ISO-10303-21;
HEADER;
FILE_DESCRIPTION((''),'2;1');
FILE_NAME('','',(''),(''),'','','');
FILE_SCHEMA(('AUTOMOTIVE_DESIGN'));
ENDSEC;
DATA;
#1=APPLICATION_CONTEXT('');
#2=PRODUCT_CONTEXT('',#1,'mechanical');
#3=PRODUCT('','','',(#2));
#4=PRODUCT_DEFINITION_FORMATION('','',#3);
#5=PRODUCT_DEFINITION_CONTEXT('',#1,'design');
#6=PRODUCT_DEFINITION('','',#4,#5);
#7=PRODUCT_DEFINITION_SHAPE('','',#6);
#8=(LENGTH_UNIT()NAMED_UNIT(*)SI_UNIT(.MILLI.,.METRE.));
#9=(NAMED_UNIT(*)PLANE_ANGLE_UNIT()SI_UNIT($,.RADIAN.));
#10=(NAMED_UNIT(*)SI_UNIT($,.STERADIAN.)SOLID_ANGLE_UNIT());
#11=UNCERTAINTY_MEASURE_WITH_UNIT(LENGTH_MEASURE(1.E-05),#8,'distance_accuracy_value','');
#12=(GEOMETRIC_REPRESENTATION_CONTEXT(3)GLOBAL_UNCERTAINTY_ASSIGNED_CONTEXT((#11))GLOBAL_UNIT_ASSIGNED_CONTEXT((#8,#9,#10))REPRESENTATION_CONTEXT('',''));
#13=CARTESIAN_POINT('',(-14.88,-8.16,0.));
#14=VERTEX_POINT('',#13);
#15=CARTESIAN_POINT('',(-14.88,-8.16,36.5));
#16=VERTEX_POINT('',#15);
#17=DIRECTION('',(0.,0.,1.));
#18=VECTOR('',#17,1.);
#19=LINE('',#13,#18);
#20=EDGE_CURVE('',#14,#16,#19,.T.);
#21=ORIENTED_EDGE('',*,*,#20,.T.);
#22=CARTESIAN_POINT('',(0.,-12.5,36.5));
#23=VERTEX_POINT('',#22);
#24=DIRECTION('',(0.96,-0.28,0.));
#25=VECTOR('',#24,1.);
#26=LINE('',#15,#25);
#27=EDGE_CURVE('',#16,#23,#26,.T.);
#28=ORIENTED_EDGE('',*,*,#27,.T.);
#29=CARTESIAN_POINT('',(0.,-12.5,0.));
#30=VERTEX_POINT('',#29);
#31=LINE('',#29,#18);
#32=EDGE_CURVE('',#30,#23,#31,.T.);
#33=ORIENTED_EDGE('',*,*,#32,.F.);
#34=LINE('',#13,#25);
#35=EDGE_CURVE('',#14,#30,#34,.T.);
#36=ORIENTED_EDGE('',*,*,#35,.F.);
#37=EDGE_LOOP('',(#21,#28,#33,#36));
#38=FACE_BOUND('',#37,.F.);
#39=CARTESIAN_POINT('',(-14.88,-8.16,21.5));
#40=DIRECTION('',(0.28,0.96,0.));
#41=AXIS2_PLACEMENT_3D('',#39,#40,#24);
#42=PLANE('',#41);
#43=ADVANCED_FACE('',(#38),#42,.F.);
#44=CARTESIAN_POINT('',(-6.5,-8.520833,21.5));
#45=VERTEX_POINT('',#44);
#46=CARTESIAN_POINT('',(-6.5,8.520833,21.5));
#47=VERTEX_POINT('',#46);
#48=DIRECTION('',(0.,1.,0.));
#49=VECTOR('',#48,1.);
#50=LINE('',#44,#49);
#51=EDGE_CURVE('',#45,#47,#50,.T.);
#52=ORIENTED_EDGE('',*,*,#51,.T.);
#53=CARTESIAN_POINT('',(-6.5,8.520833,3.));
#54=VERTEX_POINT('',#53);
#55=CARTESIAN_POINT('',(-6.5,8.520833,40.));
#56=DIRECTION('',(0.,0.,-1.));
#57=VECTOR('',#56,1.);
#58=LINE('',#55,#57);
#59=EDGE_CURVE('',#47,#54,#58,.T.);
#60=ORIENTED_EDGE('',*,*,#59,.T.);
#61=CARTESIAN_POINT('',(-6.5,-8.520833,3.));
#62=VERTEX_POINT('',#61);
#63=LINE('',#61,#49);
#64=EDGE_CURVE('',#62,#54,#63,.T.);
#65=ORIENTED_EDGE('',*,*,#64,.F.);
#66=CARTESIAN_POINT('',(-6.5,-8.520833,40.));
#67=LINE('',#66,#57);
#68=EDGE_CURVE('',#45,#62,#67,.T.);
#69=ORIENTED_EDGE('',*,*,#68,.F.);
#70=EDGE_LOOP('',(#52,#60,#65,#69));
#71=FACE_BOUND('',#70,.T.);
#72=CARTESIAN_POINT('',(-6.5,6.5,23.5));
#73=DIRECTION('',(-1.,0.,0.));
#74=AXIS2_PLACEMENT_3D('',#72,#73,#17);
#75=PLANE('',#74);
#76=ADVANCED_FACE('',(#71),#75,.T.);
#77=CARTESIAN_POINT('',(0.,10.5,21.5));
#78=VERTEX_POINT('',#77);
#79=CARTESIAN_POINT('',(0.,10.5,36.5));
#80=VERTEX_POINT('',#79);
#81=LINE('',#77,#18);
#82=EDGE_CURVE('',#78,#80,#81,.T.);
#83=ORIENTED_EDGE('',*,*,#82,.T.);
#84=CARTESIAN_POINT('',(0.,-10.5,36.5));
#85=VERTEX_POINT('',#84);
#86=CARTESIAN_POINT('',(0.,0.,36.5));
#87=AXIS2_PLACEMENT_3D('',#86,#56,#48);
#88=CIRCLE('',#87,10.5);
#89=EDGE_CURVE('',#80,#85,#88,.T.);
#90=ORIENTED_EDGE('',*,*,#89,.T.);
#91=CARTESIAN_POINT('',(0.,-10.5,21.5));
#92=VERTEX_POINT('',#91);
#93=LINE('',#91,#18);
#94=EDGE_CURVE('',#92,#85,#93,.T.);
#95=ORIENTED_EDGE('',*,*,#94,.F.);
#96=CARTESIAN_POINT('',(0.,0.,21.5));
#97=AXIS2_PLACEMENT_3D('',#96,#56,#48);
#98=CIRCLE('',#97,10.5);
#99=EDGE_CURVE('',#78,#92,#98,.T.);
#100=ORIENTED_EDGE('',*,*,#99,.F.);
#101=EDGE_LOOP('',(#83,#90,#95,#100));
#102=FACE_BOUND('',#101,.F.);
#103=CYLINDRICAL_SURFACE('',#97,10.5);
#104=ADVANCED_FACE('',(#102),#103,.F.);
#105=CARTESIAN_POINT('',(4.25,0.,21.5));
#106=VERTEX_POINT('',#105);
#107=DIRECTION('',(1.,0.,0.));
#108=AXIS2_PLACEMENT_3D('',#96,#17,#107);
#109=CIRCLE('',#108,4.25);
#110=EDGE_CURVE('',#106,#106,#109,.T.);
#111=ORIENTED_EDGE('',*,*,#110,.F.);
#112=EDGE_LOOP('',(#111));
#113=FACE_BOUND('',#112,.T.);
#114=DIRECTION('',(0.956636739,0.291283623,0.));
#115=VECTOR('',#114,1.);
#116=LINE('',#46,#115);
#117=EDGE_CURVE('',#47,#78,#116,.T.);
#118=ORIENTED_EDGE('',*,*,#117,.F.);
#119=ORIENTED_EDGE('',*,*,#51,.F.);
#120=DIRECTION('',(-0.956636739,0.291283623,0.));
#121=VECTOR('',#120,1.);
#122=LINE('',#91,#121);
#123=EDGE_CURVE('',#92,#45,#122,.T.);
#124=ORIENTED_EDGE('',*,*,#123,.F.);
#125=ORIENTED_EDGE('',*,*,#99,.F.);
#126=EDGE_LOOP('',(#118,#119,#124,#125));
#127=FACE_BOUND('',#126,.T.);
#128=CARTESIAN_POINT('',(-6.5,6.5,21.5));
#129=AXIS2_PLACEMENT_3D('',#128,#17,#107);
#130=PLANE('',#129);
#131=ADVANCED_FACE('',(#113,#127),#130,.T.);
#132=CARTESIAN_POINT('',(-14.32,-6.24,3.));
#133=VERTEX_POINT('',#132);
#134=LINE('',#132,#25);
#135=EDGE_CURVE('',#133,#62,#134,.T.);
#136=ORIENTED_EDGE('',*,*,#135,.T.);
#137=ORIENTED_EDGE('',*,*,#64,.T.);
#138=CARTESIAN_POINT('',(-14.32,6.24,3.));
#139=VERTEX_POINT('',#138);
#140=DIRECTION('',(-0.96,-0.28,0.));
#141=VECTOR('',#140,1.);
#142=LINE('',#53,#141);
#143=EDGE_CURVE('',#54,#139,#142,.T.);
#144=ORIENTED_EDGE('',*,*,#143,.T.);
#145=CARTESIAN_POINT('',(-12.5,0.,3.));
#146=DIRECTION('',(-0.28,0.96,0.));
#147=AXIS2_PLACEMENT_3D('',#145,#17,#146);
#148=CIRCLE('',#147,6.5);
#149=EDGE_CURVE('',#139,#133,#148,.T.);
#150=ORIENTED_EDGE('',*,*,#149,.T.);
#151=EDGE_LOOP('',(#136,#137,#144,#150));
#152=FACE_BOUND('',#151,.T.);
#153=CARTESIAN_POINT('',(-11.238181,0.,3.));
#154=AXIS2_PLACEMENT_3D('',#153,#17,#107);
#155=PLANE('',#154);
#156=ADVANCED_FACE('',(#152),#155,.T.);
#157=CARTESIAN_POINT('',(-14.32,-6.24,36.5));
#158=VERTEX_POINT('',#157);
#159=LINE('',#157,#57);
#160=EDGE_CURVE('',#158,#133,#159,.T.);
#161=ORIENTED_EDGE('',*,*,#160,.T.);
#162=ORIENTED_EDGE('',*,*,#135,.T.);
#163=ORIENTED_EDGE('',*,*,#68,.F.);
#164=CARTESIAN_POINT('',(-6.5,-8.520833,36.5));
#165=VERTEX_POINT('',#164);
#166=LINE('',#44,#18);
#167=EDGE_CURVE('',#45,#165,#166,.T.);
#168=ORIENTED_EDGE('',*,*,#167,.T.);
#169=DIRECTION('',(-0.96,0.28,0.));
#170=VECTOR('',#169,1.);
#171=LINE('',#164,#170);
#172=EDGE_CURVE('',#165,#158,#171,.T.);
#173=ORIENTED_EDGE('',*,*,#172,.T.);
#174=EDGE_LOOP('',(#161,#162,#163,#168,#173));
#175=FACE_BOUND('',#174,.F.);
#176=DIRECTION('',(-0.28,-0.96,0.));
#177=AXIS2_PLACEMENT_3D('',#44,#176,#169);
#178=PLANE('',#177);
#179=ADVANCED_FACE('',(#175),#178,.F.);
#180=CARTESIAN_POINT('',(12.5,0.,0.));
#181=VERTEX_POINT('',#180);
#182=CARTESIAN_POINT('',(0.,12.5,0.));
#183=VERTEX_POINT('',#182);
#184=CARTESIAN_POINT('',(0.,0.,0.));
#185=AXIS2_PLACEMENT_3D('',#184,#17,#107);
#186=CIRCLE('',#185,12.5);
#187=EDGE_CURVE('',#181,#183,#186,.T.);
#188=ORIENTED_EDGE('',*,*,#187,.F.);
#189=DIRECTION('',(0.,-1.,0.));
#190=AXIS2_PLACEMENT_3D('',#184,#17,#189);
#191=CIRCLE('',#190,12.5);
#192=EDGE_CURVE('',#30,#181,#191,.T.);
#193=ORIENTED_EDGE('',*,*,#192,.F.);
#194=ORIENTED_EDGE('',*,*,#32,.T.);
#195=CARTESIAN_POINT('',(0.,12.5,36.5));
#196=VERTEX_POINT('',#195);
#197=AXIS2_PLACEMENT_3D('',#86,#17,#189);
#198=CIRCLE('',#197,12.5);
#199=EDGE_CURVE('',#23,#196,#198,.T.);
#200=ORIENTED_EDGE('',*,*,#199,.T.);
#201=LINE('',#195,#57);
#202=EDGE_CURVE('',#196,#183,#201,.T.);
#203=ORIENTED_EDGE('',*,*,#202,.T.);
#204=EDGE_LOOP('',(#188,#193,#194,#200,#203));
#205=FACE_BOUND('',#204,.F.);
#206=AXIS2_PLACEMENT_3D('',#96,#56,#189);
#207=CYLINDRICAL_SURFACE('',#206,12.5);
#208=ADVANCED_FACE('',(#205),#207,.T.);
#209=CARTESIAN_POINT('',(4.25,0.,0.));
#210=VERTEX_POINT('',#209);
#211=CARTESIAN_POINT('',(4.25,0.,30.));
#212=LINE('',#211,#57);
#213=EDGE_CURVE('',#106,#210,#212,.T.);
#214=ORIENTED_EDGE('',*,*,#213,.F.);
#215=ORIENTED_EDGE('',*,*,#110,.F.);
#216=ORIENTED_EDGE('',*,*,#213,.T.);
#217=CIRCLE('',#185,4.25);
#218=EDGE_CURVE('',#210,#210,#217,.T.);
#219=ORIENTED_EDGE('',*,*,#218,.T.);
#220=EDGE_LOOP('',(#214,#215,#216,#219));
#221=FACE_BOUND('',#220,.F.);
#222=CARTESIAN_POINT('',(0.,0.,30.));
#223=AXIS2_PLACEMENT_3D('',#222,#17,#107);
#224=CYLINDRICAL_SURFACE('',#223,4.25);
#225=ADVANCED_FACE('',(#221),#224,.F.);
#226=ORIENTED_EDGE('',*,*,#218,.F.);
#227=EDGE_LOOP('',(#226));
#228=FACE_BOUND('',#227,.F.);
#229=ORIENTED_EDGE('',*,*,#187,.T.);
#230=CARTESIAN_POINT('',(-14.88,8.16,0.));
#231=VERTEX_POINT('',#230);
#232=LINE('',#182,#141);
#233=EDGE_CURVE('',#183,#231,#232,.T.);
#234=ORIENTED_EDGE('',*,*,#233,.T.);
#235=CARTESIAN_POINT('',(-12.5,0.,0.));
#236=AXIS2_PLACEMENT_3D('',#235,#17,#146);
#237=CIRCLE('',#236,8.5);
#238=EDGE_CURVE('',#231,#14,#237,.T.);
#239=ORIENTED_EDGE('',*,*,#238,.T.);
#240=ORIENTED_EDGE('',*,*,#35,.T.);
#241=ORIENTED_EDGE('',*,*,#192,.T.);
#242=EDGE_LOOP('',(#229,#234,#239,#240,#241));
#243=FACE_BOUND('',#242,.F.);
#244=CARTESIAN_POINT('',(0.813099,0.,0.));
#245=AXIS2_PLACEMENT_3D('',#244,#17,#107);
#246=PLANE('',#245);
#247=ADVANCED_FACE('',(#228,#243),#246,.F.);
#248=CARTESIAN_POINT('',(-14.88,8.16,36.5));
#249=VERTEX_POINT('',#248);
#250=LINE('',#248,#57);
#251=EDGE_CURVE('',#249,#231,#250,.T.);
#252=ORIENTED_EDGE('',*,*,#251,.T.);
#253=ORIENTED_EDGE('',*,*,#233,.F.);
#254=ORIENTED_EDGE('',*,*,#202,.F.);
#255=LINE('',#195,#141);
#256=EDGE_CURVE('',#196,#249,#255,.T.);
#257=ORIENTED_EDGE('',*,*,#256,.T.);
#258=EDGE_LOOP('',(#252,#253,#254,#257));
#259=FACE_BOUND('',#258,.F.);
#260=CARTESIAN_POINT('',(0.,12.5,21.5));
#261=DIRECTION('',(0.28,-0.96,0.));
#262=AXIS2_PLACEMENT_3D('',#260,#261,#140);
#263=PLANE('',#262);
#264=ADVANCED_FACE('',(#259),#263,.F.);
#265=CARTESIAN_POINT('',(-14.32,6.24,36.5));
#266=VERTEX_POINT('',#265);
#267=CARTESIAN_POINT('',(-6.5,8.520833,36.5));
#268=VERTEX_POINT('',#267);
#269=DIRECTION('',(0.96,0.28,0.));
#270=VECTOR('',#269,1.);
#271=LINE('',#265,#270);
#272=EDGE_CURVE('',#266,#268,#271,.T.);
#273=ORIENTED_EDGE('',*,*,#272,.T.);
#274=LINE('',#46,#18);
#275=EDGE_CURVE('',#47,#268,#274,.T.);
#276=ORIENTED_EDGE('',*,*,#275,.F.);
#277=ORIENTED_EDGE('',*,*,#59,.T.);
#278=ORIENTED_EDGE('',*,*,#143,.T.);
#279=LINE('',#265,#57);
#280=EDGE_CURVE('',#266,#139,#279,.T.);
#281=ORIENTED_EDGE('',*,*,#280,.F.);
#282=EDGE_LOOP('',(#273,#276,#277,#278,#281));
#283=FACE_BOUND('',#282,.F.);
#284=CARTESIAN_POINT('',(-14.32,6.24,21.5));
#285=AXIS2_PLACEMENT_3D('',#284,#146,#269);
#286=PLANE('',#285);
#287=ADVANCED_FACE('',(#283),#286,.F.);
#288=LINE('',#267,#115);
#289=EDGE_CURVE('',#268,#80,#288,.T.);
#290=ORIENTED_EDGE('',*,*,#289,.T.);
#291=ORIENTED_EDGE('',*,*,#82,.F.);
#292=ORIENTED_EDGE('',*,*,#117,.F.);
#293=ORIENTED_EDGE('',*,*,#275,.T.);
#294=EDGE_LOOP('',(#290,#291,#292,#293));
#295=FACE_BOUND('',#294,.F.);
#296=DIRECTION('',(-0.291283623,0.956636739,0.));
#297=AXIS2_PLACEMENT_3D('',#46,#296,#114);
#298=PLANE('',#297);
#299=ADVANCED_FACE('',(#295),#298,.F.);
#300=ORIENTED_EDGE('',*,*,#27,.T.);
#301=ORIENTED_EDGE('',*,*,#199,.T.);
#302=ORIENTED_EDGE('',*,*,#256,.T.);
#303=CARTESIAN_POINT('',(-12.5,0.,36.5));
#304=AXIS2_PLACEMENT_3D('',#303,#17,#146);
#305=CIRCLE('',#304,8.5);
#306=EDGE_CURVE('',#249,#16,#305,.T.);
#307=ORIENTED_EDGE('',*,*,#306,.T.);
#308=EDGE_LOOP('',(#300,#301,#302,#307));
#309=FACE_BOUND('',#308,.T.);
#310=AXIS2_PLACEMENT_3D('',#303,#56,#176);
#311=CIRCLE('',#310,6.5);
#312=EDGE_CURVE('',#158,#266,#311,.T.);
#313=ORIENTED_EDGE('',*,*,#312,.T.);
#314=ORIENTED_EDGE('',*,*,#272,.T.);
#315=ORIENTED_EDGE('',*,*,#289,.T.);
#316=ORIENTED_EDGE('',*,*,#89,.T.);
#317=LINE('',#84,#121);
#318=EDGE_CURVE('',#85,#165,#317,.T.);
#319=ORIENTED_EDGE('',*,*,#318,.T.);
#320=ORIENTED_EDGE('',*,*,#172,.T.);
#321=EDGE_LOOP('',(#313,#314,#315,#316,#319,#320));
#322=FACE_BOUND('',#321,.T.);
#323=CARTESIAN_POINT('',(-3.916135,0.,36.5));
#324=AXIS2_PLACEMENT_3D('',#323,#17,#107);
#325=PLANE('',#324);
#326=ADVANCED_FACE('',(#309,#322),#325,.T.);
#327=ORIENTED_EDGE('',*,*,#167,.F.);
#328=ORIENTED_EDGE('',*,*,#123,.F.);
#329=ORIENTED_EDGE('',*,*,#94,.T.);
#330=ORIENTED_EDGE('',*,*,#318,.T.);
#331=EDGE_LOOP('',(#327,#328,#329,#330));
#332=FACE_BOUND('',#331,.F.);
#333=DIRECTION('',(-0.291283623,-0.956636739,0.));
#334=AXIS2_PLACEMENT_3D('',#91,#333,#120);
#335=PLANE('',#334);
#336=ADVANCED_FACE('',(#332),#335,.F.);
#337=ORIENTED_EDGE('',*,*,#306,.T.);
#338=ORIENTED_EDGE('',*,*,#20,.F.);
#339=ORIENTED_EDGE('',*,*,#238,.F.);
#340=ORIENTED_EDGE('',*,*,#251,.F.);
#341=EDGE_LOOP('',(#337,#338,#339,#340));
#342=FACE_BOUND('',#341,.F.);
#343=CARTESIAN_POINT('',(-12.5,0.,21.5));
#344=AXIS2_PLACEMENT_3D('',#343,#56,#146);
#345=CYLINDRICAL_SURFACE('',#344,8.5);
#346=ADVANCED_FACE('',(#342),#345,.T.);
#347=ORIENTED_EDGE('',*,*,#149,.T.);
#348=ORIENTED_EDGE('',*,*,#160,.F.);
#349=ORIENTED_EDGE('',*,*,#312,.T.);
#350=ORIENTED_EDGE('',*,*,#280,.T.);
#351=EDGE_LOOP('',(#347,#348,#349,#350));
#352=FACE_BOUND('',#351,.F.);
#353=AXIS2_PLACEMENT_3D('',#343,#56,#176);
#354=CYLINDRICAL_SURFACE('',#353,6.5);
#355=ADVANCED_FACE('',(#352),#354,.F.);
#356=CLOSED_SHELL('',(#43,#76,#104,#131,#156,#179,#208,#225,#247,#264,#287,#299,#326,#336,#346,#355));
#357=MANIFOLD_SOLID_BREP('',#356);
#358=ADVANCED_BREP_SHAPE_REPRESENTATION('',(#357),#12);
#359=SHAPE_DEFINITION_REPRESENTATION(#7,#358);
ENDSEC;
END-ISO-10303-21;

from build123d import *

# Parameters (mm, degrees)
F1_DEPTH  = 30
F3_DEPTH  = 27
F2_R      = 4
F5_DEPTH  = 6.5
F4_R      = 4.25
F4_R_2    = 4
F6_DEPTH  = 35.2
F7_DEPTH  = 10
F8_W      = 1
F8_H      = 16.5
F9_DEPTH  = 13.4
F11_DEPTH = 16
F12_DEPTH = 0.5
F13_R     = 1.25
F14_DEPTH = 25
F15_DEPTH = 2
F16_DEPTH = 18.5
F18_DEPTH = 15


with BuildPart() as f1:
    # F0 (on Top) → F1 (new body)
    with BuildSketch(Plane.XY):
        with BuildLine():
            ThreePointArc((-9.61, 7.9936162029), (-5.5424501439, 4.8828782496), (-4, 0))
            ThreePointArc((-4, 0), (-5.5424501439, -4.8828782496), (-9.61, -7.9936162029))
            ThreePointArc((-9.61, -7.9936162029), (-8.2636700449, -9.3787929602), (-6.72, -10.54))
            Line((-6.72, -10.54), (0, -12.5))
            ThreePointArc((0, -12.5), (8.8388347648, -8.8388347648), (12.5, 0))
            ThreePointArc((12.5, 0), (8.8388347648, 8.8388347648), (0, 12.5))
            Line((0, 12.5), (-6.72, 10.54))
            ThreePointArc((-6.72, 10.54), (-8.2636700449, 9.3787929602), (-9.61, 7.9936162029))
        make_face()
        with BuildLine():
            ThreePointArc((-4, 0), (0, 4), (4, 0))
            ThreePointArc((4, 0), (0, -4), (-4, 0))
        make_face(mode=Mode.SUBTRACT)
        with BuildLine():
            ThreePointArc((-9.61, -7.9936162029), (-5.5424501439, -4.8828782496), (-4, 0))
            ThreePointArc((-4, 0), (-5.5424501439, 4.8828782496), (-9.61, 7.9936162029))
            ThreePointArc((-9.61, 7.9936162029), (-12.5, 0), (-9.61, -7.9936162029))
        make_face()
        with BuildLine():
            ThreePointArc((-14.88, 8.16), (-12.231772686, 8.4957668346), (-9.61, 7.9936162029))
            ThreePointArc((-9.61, 7.9936162029), (-8.2636700449, 9.3787929602), (-6.72, 10.54))
            Line((-6.72, 10.54), (-14.88, 8.16))
        make_face()
        with BuildLine():
            ThreePointArc((-9.61, -7.9936162029), (-12.5, 0), (-9.61, 7.9936162029))
            ThreePointArc((-9.61, 7.9936162029), (-12.231772686, 8.4957668346), (-14.88, 8.16))
            ThreePointArc((-14.88, 8.16), (-21, 0), (-14.88, -8.16))
            ThreePointArc((-14.88, -8.16), (-12.231772686, -8.4957668346), (-9.61, -7.9936162029))
        make_face()
        with BuildLine():
            ThreePointArc((-6.72, -10.54), (-8.2636700449, -9.3787929602), (-9.61, -7.9936162029))
            ThreePointArc((-9.61, -7.9936162029), (-12.231772686, -8.4957668346), (-14.88, -8.16))
            Line((-14.88, -8.16), (-6.72, -10.54))
        make_face()
    extrude(amount=F1_DEPTH)

    # F2 (on face) → F3 (cut)
    with BuildSketch(Plane.XY.offset(30)):
        with BuildLine():
            Line((-14.32, -6.24), (-6.5, -8.5208333333))
            Line((-6.5, -8.5208333333), (-6.5, -6.5))
            Line((-6.5, -6.5), (-6.5, 6.5))
            Line((-6.5, 6.5), (-6.5, 8.5208333333))
            Line((-6.5, 8.5208333333), (-14.32, 6.24))
            ThreePointArc((-14.32, 6.24), (-19, 0), (-14.32, -6.24))
        make_face()
    extrude(amount=-F3_DEPTH, mode=Mode.SUBTRACT)

    # F2 (on face) → F5 (cut)
    with BuildSketch(Plane.XY.offset(30)):
        Polygon((-6.5, 6.5), (-6.5, -6.5), (6.5, -6.5), (10, 0), (6.5, 6.5), align=None)
        Circle(F2_R, mode=Mode.SUBTRACT)
    extrude(amount=-F5_DEPTH, mode=Mode.SUBTRACT)

    # F4 (on face) → F6 (cut)
    with BuildSketch(Plane.XY.offset(30)):
        Circle(F4_R)
        Circle(F4_R_2, mode=Mode.SUBTRACT)
    extrude(amount=-F6_DEPTH, mode=Mode.SUBTRACT)

    # F7 (add): a face of the model
    f7_faces = [f1.faces().sort_by_distance(p)[0] for p in [
        (-7.3229596651, 9.9287188517, 30),
    ]]
    extrude(f7_faces, amount=F7_DEPTH)

    # F8 (on face) → F9 (join)
    with BuildSketch(Plane.XZ.offset(-6.5)):
        with Locations((-6, 31.75)):
            Rectangle(F8_W, F8_H)
    extrude(amount=F9_DEPTH)

    # F10 (on face) → F11 (cut)
    with BuildSketch(Plane.XY.offset(40)):
        with BuildLine():
            Line((6.5, -6.5), (-5.5, -6.5))
            Line((-5.5, -6.5), (0, -12.5))
            ThreePointArc((0, -12.5), (12.5, 0), (0, 12.5))
            Line((0, 12.5), (-5.5, 6.5))
            Line((-5.5, 6.5), (6.5, 6.5))
            Line((6.5, 6.5), (10, 0))
            Line((10, 0), (6.5, -6.5))
        make_face()
    extrude(amount=-F11_DEPTH, mode=Mode.SUBTRACT)

    # F12 (cut): a face of the model
    f12_faces = [f1.faces().sort_by_distance(p)[0] for p in [
        (0.5, -6.808058436, 24),
    ]]
    extrude(f12_faces, amount=-F12_DEPTH, mode=Mode.SUBTRACT)

    # F13 (on face) → F14 (cut)
    with BuildSketch(Plane.YZ.offset(-5.5)):
        with Locations((0, 31.75)):
            Circle(F13_R)
    extrude(amount=-F14_DEPTH, mode=Mode.SUBTRACT)

    # F15 (cut): a face of the model
    f15_faces = [f1.faces().sort_by_distance(p)[0] for p in [
        (-2.5229134485, -9.2918373278, 23.5),
    ]]
    extrude(f15_faces, amount=-F15_DEPTH, mode=Mode.SUBTRACT)

    # F16 (cut): a face of the model
    f16_faces = [f1.faces().sort_by_distance(p)[0] for p in [
        (-2.9906782868, 9.7206217629, 40),
    ]]
    extrude(f16_faces, amount=-F16_DEPTH, mode=Mode.SUBTRACT)

    # F17 (on face) → F18 (join)
    with BuildSketch(Plane.XY.offset(21.5)):
        with BuildLine():
            ThreePointArc((-14.88, 8.16), (-21, 0), (-14.88, -8.16))
            Line((-14.88, -8.16), (0, -12.5))
            ThreePointArc((0, -12.5), (12.5, 0), (0, 12.5))
            Line((0, 12.5), (-14.88, 8.16))
        make_face()
        with BuildLine():
            ThreePointArc((0, 10.5), (10.5, 0), (0, -10.5))
            Line((0, -10.5), (-6.5, -8.5208333333))
            Line((-6.5, -8.5208333333), (-14.32, -6.24))
            ThreePointArc((-14.32, -6.24), (-19, 0), (-14.32, 6.24))
            Line((-14.32, 6.24), (-6.5, 8.5208333333))
            Line((-6.5, 8.5208333333), (0, 10.5))
        make_face(mode=Mode.SUBTRACT)
    extrude(amount=F18_DEPTH)


solid = f1.part
